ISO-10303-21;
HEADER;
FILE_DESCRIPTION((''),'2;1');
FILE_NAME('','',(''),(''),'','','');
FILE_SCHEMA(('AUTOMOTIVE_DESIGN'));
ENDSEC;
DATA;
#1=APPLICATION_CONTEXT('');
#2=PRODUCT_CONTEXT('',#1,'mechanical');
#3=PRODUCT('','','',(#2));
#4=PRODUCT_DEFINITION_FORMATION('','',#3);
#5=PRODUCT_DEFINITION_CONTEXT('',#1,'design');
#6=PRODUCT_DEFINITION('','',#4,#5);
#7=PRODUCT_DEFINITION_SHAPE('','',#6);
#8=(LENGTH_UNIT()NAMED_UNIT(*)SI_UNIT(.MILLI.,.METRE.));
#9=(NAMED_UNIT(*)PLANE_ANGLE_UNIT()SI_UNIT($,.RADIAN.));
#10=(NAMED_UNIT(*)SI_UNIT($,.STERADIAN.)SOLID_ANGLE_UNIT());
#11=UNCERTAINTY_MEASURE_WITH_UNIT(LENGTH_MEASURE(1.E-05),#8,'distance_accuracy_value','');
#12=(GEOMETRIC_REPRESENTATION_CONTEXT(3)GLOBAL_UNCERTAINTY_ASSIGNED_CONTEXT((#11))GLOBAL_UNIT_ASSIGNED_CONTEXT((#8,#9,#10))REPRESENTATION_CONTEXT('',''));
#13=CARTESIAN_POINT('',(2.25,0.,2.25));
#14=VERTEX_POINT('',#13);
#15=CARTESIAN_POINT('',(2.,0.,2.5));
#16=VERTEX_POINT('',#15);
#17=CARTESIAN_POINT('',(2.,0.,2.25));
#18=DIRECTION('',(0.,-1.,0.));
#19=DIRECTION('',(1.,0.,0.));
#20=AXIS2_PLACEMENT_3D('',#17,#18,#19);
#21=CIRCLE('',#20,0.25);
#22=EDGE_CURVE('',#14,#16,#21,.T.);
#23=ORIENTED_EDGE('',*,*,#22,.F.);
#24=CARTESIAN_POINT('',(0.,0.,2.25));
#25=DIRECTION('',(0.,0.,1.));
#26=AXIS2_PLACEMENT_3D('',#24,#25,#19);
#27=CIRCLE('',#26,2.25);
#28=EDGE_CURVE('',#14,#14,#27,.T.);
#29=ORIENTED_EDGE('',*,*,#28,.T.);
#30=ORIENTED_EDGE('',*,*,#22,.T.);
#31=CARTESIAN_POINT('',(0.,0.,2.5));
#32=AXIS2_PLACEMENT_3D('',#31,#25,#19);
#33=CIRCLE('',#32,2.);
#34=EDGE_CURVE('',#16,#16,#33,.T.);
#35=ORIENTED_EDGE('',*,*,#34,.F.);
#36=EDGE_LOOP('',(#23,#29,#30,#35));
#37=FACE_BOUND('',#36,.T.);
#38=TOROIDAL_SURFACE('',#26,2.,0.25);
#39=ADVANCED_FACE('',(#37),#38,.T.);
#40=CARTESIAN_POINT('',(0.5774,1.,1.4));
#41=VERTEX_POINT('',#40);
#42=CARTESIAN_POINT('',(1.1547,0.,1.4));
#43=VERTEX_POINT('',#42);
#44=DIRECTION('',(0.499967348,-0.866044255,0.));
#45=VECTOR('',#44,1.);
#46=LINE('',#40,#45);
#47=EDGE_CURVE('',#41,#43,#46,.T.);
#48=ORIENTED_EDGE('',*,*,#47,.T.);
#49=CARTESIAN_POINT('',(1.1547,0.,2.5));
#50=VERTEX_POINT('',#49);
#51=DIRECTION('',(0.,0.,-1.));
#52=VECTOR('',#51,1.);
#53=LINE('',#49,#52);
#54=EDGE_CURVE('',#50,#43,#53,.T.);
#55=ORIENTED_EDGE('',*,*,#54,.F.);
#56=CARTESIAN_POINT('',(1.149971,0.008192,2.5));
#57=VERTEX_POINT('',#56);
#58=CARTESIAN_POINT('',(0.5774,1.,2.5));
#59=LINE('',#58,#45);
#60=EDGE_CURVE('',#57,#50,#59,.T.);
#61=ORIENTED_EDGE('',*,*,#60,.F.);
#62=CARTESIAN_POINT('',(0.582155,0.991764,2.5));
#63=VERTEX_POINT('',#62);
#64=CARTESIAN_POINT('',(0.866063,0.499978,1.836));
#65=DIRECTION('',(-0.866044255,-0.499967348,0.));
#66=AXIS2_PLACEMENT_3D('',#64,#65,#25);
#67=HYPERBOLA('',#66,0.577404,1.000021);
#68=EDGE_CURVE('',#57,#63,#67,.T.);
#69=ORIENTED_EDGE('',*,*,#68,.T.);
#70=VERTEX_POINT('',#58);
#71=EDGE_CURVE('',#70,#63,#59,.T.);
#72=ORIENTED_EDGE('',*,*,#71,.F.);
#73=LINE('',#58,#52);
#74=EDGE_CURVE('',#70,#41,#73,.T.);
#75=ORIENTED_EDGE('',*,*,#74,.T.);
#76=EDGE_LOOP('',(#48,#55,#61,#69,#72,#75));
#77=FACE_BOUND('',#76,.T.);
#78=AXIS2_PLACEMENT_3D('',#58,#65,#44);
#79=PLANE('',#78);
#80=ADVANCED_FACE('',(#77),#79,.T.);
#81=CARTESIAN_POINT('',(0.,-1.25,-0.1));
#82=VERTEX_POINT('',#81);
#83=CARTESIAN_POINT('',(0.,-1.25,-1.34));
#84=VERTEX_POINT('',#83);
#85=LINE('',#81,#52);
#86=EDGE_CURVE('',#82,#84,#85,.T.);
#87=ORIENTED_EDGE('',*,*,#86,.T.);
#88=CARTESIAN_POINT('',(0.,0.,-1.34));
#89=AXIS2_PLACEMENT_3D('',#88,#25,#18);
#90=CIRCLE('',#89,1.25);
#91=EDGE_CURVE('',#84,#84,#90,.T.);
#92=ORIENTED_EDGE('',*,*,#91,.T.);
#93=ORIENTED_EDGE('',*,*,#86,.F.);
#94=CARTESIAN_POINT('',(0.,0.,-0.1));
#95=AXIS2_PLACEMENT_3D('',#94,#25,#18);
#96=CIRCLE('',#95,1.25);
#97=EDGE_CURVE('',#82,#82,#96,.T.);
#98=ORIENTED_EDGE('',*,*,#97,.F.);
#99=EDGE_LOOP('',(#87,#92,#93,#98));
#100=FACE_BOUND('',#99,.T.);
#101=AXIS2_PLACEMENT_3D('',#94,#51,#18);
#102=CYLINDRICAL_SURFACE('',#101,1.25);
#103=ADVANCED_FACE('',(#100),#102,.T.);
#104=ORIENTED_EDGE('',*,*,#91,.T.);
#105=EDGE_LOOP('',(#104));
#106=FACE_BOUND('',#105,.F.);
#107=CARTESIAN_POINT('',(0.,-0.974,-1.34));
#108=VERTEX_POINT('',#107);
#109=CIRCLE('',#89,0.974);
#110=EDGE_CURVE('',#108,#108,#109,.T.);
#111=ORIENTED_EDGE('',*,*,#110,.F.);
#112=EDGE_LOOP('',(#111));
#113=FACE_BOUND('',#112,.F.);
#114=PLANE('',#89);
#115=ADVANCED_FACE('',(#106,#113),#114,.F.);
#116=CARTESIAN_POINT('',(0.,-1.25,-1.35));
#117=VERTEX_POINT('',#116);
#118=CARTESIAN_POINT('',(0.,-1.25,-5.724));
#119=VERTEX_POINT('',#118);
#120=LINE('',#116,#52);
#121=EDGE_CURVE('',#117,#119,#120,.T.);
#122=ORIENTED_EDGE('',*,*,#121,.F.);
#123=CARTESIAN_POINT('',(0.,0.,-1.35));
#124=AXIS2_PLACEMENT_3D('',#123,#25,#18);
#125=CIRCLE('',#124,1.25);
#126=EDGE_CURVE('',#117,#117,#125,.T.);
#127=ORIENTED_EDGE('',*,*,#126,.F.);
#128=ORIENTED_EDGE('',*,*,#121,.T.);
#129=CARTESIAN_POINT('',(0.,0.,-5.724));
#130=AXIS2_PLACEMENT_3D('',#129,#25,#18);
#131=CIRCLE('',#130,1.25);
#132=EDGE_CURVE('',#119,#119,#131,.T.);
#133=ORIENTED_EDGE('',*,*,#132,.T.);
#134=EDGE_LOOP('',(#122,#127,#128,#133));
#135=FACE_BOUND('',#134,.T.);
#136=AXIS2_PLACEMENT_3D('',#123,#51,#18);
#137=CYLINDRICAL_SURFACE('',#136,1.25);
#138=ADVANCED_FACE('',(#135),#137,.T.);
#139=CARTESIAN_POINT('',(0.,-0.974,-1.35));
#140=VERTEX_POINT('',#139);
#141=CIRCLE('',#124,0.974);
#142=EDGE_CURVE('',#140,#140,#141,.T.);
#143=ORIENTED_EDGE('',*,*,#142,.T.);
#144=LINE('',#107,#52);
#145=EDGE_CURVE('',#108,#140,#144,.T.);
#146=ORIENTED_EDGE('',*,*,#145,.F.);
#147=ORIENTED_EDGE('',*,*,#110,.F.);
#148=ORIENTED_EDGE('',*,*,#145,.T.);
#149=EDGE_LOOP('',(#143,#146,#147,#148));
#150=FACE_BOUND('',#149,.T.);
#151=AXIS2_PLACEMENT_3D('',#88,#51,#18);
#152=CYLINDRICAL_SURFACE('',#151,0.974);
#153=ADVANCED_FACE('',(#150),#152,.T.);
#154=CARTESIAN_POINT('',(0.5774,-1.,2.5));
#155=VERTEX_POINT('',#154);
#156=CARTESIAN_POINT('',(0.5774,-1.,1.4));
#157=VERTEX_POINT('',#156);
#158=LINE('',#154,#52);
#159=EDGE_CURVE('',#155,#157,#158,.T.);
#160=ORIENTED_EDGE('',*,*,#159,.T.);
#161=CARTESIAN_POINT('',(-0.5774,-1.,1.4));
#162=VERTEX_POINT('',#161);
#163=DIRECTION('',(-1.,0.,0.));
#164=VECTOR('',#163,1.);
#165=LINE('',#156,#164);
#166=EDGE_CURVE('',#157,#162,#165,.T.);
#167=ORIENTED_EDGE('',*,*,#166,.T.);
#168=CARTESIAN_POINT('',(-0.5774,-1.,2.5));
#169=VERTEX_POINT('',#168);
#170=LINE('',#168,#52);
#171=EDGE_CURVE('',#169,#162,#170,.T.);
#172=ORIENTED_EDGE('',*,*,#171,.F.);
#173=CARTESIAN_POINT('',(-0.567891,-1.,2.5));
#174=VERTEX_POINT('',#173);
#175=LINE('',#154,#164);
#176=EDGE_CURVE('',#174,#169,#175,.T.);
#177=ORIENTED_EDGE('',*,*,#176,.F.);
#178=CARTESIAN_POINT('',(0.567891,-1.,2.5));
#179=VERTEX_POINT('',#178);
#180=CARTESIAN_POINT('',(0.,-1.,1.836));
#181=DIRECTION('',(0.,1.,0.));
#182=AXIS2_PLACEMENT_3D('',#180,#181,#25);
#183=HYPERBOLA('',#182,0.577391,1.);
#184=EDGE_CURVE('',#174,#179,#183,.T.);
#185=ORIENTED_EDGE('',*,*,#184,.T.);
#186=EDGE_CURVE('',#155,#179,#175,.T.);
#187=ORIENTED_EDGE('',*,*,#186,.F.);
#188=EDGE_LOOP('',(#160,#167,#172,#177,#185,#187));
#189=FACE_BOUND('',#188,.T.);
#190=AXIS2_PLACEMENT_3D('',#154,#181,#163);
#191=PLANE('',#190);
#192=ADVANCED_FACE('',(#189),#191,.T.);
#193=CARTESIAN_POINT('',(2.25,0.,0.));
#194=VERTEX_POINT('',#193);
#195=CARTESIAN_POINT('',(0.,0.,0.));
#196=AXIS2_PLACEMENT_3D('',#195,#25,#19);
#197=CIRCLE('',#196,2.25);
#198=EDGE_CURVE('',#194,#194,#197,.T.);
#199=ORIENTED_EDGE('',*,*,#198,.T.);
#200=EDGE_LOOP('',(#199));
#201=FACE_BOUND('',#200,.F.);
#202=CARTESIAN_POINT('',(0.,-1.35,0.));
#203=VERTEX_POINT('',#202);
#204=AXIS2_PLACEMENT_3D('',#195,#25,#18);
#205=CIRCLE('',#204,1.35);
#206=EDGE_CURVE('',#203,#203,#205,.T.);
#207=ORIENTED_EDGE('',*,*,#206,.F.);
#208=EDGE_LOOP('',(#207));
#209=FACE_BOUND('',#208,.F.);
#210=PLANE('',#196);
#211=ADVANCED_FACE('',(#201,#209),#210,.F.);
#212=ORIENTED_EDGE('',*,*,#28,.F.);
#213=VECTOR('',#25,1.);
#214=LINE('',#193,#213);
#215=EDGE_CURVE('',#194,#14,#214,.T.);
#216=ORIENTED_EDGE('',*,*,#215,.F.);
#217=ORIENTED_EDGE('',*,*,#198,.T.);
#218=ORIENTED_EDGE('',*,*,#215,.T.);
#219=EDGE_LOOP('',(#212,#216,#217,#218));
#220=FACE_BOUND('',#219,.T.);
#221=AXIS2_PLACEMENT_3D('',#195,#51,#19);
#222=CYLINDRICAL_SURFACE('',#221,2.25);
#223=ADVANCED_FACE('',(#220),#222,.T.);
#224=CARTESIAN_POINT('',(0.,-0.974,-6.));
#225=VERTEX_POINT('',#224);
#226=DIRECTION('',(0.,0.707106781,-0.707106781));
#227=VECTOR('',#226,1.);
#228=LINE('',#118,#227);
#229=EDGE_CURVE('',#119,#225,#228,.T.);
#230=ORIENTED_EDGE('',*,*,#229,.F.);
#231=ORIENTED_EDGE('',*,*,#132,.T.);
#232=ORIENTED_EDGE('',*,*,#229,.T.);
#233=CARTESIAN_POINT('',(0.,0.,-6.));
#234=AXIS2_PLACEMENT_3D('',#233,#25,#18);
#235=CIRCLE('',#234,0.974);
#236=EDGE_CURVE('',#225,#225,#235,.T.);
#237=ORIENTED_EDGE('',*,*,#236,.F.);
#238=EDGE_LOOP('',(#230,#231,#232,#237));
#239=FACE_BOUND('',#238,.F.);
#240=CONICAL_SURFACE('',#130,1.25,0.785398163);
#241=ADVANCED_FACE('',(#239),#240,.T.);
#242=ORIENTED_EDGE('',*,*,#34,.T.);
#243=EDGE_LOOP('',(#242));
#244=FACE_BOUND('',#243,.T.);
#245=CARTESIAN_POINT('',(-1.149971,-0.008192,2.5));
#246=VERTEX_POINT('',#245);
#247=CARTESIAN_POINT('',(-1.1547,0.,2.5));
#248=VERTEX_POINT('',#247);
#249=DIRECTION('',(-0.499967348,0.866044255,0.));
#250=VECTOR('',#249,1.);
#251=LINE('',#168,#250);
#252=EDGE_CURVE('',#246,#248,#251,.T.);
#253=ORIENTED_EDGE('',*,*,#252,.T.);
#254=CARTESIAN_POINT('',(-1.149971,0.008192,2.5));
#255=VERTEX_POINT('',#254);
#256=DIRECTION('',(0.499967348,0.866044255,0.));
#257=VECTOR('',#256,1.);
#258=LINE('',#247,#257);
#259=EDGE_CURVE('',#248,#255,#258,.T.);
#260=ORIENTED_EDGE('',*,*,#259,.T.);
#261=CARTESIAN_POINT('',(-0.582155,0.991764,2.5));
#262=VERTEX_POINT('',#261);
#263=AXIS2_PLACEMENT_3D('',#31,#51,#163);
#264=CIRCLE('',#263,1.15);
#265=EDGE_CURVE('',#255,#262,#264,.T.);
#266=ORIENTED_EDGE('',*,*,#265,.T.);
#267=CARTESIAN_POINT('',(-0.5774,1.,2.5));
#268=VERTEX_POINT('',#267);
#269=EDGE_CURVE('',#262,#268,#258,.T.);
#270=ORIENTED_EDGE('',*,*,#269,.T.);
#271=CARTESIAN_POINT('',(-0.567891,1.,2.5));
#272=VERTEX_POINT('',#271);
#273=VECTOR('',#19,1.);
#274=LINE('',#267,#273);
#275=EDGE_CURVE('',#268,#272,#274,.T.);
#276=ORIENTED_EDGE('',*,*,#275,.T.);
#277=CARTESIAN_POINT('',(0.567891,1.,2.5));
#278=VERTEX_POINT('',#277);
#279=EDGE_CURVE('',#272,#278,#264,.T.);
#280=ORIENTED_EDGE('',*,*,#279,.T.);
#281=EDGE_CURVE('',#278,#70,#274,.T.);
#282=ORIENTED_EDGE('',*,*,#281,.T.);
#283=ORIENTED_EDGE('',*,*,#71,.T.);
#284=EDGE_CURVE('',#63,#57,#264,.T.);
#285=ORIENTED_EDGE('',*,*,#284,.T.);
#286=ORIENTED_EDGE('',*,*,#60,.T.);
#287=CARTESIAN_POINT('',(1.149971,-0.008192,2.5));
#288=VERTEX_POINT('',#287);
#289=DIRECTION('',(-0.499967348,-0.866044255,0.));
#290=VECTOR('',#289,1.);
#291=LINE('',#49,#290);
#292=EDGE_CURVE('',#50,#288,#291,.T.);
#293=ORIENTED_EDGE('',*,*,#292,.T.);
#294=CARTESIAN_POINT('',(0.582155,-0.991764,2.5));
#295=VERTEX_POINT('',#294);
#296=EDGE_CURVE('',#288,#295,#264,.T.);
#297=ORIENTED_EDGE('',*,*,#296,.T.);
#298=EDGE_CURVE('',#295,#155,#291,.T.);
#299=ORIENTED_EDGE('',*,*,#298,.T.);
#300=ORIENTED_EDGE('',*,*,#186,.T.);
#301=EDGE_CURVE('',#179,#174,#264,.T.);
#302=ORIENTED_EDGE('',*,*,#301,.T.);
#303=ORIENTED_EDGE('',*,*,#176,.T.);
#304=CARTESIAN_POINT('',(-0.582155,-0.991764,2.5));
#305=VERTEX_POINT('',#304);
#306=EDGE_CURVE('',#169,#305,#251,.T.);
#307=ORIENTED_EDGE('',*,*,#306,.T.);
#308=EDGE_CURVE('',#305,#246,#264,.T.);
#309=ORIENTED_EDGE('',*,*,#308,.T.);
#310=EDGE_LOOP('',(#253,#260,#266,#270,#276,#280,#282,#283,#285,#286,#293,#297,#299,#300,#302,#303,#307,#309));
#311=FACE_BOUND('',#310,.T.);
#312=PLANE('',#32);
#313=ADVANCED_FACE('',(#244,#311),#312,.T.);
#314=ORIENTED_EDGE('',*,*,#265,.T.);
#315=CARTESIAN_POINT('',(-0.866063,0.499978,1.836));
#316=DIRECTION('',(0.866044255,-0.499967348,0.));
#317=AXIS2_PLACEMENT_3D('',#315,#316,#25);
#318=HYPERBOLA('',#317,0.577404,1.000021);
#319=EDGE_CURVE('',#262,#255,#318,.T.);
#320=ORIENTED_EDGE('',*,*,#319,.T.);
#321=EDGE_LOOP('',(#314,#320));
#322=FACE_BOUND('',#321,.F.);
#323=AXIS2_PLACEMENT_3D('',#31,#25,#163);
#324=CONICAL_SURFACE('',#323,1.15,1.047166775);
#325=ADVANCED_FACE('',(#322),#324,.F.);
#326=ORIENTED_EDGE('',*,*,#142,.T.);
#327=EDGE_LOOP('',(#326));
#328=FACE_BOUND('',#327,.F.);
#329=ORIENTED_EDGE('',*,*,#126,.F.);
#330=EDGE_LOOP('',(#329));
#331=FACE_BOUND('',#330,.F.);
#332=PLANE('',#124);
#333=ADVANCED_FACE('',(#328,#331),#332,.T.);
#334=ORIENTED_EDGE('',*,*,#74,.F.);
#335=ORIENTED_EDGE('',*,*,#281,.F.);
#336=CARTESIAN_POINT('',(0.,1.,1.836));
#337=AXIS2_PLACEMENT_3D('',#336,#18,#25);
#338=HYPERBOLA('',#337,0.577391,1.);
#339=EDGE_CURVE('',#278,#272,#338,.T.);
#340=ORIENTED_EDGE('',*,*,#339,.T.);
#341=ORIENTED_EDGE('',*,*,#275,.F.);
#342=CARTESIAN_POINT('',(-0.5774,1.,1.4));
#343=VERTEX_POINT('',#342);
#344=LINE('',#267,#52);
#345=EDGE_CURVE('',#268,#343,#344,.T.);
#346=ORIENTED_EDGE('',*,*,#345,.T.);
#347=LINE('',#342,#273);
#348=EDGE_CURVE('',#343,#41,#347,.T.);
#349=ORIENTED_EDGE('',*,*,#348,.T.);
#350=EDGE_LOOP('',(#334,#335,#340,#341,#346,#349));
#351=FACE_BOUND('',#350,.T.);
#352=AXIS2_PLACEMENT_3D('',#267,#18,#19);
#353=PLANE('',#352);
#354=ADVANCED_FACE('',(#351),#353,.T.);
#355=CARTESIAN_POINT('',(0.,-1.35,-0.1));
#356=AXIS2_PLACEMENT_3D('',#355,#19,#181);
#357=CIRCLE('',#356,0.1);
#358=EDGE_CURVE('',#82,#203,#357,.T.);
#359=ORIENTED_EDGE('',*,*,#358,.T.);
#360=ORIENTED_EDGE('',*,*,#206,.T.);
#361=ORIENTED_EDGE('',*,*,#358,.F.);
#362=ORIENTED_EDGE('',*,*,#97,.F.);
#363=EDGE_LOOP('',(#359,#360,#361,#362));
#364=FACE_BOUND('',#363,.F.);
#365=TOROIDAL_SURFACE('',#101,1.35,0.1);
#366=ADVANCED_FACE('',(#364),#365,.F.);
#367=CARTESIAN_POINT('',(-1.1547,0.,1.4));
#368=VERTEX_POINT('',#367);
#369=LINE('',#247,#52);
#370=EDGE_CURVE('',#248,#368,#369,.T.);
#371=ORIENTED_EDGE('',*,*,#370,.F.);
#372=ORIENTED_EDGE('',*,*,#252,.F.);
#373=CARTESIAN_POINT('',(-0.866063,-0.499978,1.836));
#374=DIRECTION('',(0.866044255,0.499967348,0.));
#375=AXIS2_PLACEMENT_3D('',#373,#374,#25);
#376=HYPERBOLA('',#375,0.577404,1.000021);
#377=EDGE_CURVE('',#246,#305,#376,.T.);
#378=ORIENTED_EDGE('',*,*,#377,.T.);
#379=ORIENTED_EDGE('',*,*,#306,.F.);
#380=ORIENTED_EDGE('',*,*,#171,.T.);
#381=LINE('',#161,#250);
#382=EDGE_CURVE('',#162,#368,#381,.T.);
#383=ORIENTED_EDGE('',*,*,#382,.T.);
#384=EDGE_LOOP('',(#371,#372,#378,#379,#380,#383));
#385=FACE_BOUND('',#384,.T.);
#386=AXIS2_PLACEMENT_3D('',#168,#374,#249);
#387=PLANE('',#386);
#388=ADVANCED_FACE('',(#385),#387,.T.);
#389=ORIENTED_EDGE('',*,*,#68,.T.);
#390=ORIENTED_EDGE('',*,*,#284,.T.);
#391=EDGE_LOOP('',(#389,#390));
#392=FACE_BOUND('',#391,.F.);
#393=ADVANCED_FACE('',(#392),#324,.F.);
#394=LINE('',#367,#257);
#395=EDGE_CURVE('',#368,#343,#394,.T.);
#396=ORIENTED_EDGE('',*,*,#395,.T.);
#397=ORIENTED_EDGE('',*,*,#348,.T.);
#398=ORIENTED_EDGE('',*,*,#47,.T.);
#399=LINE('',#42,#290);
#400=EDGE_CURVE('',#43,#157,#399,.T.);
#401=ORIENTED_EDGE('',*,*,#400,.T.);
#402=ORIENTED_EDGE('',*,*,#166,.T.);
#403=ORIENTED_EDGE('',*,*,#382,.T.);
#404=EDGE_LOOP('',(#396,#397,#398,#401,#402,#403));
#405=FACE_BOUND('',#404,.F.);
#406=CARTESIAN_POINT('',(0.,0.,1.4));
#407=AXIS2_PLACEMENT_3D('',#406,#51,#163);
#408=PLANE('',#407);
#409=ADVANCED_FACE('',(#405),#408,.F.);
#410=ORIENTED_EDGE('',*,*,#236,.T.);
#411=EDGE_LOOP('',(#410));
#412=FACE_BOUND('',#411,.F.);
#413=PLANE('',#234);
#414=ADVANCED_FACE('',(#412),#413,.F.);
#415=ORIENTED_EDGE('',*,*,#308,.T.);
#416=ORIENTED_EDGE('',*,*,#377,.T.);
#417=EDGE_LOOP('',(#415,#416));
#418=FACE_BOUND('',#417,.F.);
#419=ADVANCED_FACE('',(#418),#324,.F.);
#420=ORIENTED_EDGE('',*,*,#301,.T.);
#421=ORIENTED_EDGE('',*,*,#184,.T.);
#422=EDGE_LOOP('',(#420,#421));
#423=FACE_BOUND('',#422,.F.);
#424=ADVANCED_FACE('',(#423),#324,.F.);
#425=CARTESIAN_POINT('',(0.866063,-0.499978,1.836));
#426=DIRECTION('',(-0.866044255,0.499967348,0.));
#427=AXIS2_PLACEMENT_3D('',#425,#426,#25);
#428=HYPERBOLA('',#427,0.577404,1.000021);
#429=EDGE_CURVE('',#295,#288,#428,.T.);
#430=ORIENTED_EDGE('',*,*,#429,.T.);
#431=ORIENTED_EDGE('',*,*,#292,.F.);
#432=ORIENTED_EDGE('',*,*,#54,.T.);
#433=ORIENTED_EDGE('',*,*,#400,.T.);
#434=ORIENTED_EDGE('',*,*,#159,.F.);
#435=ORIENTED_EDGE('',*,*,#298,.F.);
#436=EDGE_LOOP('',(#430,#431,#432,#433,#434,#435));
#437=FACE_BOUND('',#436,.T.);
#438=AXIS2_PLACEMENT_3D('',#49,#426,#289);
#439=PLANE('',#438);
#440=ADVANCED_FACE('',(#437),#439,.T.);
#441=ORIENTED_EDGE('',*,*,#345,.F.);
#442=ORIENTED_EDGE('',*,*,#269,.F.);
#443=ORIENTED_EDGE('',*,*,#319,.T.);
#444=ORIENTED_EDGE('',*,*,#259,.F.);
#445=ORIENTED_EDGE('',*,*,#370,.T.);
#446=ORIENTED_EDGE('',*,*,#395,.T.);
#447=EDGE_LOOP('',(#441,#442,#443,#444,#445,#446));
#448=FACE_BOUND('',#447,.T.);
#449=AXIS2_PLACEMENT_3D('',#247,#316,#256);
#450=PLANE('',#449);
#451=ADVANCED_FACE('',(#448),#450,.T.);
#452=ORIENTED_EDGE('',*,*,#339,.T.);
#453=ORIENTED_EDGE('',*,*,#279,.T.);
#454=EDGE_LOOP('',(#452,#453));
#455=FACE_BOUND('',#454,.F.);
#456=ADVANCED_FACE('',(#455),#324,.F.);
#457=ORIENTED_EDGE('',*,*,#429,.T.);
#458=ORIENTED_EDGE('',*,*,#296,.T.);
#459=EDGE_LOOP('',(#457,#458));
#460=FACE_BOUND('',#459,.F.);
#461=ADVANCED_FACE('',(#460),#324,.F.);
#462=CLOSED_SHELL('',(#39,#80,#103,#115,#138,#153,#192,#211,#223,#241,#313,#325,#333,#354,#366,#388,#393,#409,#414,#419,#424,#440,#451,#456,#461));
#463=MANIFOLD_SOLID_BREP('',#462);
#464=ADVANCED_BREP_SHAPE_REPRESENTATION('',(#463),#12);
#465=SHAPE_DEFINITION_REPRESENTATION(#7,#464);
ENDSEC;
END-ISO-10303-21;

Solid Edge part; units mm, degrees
sketch "Sketch1" plane through (0, 0, 0) normal (0, 0, 1) x (1, 0, 0)
  circle A0 centre (0, 0) radius 2.25
extrude "Protrusion1" add sketch "Sketch1" along normal blind 2.5
sketch "Sketch2" plane through (0, 0, 2.5) normal (0, 0, 1) x (0, 1, 0)
  line L0 (0, 1.1547) -> (1, 0.5774)
  line L1 (1, 0.5774) -> (1, -0.5774)
  line L2 (1, -0.5774) -> (0, -1.1547)
  line L3 (0, -1.1547) -> (-1, -0.5774)
  line L4 (-1, -0.5774) -> (-1, 0.5774)
  line L5 (-1, 0.5774) -> (0, 1.1547)
extrude "Cutout1" cut sketch "Sketch2" against normal blind 1.1
fillet "Round1" radius 0.25 1 edges at (-2.25, 0, 2.5)
sketch "Sketch3" plane through (0, 0, 0) normal (1, 0, 0) x (0, 1, 0)
  line L0 (-0.974, -6) -> (0, -6)
  line L1 (-1.25, -5.724) -> (-0.974, -6)
  line L2 (-1.25, -1.35) -> (-1.25, -5.724)
  line L3 (-0.974, -1.35) -> (-1.25, -1.35)
  line L4 (-0.974, -1.34) -> (-0.974, -1.35)
  line L5 (-1.25, -1.34) -> (-0.974, -1.34)
  line L6 (-1.25, -0.1) -> (-1.25, -1.34)
  arc A0 (-1.25, -0.1) -> (-1.35, 0) centre (-1.35, -0.1) ccw
  dimension "D1" = 1.35
  dimension "D2" = 0.01
  dimension "D3" = 0.1
  dimension "D4" = 6
revolve "RevolvedProtrusion1" add sketch "Sketch3" angle 360 about axis through (0, 0, -60.325) along (0, 0, 1) material side at (0, -0.487, -5.95)
cosmetic_thread "Thread1" size "M2.5"
sketch "Sketch4" plane through (0, 0, 0) normal (0, -1, 0) x (1, 0, 0)
  line L0 (-1.15, 2.5) -> (0, 1.836)
revolve "RevolvedCutout1" cut sketch "Sketch4" angle 360 about axis through (0, 0, 57.15) along (0, 0, -1) material side at (-0.55, 0, 2.2113)
properties material "Stahl"
